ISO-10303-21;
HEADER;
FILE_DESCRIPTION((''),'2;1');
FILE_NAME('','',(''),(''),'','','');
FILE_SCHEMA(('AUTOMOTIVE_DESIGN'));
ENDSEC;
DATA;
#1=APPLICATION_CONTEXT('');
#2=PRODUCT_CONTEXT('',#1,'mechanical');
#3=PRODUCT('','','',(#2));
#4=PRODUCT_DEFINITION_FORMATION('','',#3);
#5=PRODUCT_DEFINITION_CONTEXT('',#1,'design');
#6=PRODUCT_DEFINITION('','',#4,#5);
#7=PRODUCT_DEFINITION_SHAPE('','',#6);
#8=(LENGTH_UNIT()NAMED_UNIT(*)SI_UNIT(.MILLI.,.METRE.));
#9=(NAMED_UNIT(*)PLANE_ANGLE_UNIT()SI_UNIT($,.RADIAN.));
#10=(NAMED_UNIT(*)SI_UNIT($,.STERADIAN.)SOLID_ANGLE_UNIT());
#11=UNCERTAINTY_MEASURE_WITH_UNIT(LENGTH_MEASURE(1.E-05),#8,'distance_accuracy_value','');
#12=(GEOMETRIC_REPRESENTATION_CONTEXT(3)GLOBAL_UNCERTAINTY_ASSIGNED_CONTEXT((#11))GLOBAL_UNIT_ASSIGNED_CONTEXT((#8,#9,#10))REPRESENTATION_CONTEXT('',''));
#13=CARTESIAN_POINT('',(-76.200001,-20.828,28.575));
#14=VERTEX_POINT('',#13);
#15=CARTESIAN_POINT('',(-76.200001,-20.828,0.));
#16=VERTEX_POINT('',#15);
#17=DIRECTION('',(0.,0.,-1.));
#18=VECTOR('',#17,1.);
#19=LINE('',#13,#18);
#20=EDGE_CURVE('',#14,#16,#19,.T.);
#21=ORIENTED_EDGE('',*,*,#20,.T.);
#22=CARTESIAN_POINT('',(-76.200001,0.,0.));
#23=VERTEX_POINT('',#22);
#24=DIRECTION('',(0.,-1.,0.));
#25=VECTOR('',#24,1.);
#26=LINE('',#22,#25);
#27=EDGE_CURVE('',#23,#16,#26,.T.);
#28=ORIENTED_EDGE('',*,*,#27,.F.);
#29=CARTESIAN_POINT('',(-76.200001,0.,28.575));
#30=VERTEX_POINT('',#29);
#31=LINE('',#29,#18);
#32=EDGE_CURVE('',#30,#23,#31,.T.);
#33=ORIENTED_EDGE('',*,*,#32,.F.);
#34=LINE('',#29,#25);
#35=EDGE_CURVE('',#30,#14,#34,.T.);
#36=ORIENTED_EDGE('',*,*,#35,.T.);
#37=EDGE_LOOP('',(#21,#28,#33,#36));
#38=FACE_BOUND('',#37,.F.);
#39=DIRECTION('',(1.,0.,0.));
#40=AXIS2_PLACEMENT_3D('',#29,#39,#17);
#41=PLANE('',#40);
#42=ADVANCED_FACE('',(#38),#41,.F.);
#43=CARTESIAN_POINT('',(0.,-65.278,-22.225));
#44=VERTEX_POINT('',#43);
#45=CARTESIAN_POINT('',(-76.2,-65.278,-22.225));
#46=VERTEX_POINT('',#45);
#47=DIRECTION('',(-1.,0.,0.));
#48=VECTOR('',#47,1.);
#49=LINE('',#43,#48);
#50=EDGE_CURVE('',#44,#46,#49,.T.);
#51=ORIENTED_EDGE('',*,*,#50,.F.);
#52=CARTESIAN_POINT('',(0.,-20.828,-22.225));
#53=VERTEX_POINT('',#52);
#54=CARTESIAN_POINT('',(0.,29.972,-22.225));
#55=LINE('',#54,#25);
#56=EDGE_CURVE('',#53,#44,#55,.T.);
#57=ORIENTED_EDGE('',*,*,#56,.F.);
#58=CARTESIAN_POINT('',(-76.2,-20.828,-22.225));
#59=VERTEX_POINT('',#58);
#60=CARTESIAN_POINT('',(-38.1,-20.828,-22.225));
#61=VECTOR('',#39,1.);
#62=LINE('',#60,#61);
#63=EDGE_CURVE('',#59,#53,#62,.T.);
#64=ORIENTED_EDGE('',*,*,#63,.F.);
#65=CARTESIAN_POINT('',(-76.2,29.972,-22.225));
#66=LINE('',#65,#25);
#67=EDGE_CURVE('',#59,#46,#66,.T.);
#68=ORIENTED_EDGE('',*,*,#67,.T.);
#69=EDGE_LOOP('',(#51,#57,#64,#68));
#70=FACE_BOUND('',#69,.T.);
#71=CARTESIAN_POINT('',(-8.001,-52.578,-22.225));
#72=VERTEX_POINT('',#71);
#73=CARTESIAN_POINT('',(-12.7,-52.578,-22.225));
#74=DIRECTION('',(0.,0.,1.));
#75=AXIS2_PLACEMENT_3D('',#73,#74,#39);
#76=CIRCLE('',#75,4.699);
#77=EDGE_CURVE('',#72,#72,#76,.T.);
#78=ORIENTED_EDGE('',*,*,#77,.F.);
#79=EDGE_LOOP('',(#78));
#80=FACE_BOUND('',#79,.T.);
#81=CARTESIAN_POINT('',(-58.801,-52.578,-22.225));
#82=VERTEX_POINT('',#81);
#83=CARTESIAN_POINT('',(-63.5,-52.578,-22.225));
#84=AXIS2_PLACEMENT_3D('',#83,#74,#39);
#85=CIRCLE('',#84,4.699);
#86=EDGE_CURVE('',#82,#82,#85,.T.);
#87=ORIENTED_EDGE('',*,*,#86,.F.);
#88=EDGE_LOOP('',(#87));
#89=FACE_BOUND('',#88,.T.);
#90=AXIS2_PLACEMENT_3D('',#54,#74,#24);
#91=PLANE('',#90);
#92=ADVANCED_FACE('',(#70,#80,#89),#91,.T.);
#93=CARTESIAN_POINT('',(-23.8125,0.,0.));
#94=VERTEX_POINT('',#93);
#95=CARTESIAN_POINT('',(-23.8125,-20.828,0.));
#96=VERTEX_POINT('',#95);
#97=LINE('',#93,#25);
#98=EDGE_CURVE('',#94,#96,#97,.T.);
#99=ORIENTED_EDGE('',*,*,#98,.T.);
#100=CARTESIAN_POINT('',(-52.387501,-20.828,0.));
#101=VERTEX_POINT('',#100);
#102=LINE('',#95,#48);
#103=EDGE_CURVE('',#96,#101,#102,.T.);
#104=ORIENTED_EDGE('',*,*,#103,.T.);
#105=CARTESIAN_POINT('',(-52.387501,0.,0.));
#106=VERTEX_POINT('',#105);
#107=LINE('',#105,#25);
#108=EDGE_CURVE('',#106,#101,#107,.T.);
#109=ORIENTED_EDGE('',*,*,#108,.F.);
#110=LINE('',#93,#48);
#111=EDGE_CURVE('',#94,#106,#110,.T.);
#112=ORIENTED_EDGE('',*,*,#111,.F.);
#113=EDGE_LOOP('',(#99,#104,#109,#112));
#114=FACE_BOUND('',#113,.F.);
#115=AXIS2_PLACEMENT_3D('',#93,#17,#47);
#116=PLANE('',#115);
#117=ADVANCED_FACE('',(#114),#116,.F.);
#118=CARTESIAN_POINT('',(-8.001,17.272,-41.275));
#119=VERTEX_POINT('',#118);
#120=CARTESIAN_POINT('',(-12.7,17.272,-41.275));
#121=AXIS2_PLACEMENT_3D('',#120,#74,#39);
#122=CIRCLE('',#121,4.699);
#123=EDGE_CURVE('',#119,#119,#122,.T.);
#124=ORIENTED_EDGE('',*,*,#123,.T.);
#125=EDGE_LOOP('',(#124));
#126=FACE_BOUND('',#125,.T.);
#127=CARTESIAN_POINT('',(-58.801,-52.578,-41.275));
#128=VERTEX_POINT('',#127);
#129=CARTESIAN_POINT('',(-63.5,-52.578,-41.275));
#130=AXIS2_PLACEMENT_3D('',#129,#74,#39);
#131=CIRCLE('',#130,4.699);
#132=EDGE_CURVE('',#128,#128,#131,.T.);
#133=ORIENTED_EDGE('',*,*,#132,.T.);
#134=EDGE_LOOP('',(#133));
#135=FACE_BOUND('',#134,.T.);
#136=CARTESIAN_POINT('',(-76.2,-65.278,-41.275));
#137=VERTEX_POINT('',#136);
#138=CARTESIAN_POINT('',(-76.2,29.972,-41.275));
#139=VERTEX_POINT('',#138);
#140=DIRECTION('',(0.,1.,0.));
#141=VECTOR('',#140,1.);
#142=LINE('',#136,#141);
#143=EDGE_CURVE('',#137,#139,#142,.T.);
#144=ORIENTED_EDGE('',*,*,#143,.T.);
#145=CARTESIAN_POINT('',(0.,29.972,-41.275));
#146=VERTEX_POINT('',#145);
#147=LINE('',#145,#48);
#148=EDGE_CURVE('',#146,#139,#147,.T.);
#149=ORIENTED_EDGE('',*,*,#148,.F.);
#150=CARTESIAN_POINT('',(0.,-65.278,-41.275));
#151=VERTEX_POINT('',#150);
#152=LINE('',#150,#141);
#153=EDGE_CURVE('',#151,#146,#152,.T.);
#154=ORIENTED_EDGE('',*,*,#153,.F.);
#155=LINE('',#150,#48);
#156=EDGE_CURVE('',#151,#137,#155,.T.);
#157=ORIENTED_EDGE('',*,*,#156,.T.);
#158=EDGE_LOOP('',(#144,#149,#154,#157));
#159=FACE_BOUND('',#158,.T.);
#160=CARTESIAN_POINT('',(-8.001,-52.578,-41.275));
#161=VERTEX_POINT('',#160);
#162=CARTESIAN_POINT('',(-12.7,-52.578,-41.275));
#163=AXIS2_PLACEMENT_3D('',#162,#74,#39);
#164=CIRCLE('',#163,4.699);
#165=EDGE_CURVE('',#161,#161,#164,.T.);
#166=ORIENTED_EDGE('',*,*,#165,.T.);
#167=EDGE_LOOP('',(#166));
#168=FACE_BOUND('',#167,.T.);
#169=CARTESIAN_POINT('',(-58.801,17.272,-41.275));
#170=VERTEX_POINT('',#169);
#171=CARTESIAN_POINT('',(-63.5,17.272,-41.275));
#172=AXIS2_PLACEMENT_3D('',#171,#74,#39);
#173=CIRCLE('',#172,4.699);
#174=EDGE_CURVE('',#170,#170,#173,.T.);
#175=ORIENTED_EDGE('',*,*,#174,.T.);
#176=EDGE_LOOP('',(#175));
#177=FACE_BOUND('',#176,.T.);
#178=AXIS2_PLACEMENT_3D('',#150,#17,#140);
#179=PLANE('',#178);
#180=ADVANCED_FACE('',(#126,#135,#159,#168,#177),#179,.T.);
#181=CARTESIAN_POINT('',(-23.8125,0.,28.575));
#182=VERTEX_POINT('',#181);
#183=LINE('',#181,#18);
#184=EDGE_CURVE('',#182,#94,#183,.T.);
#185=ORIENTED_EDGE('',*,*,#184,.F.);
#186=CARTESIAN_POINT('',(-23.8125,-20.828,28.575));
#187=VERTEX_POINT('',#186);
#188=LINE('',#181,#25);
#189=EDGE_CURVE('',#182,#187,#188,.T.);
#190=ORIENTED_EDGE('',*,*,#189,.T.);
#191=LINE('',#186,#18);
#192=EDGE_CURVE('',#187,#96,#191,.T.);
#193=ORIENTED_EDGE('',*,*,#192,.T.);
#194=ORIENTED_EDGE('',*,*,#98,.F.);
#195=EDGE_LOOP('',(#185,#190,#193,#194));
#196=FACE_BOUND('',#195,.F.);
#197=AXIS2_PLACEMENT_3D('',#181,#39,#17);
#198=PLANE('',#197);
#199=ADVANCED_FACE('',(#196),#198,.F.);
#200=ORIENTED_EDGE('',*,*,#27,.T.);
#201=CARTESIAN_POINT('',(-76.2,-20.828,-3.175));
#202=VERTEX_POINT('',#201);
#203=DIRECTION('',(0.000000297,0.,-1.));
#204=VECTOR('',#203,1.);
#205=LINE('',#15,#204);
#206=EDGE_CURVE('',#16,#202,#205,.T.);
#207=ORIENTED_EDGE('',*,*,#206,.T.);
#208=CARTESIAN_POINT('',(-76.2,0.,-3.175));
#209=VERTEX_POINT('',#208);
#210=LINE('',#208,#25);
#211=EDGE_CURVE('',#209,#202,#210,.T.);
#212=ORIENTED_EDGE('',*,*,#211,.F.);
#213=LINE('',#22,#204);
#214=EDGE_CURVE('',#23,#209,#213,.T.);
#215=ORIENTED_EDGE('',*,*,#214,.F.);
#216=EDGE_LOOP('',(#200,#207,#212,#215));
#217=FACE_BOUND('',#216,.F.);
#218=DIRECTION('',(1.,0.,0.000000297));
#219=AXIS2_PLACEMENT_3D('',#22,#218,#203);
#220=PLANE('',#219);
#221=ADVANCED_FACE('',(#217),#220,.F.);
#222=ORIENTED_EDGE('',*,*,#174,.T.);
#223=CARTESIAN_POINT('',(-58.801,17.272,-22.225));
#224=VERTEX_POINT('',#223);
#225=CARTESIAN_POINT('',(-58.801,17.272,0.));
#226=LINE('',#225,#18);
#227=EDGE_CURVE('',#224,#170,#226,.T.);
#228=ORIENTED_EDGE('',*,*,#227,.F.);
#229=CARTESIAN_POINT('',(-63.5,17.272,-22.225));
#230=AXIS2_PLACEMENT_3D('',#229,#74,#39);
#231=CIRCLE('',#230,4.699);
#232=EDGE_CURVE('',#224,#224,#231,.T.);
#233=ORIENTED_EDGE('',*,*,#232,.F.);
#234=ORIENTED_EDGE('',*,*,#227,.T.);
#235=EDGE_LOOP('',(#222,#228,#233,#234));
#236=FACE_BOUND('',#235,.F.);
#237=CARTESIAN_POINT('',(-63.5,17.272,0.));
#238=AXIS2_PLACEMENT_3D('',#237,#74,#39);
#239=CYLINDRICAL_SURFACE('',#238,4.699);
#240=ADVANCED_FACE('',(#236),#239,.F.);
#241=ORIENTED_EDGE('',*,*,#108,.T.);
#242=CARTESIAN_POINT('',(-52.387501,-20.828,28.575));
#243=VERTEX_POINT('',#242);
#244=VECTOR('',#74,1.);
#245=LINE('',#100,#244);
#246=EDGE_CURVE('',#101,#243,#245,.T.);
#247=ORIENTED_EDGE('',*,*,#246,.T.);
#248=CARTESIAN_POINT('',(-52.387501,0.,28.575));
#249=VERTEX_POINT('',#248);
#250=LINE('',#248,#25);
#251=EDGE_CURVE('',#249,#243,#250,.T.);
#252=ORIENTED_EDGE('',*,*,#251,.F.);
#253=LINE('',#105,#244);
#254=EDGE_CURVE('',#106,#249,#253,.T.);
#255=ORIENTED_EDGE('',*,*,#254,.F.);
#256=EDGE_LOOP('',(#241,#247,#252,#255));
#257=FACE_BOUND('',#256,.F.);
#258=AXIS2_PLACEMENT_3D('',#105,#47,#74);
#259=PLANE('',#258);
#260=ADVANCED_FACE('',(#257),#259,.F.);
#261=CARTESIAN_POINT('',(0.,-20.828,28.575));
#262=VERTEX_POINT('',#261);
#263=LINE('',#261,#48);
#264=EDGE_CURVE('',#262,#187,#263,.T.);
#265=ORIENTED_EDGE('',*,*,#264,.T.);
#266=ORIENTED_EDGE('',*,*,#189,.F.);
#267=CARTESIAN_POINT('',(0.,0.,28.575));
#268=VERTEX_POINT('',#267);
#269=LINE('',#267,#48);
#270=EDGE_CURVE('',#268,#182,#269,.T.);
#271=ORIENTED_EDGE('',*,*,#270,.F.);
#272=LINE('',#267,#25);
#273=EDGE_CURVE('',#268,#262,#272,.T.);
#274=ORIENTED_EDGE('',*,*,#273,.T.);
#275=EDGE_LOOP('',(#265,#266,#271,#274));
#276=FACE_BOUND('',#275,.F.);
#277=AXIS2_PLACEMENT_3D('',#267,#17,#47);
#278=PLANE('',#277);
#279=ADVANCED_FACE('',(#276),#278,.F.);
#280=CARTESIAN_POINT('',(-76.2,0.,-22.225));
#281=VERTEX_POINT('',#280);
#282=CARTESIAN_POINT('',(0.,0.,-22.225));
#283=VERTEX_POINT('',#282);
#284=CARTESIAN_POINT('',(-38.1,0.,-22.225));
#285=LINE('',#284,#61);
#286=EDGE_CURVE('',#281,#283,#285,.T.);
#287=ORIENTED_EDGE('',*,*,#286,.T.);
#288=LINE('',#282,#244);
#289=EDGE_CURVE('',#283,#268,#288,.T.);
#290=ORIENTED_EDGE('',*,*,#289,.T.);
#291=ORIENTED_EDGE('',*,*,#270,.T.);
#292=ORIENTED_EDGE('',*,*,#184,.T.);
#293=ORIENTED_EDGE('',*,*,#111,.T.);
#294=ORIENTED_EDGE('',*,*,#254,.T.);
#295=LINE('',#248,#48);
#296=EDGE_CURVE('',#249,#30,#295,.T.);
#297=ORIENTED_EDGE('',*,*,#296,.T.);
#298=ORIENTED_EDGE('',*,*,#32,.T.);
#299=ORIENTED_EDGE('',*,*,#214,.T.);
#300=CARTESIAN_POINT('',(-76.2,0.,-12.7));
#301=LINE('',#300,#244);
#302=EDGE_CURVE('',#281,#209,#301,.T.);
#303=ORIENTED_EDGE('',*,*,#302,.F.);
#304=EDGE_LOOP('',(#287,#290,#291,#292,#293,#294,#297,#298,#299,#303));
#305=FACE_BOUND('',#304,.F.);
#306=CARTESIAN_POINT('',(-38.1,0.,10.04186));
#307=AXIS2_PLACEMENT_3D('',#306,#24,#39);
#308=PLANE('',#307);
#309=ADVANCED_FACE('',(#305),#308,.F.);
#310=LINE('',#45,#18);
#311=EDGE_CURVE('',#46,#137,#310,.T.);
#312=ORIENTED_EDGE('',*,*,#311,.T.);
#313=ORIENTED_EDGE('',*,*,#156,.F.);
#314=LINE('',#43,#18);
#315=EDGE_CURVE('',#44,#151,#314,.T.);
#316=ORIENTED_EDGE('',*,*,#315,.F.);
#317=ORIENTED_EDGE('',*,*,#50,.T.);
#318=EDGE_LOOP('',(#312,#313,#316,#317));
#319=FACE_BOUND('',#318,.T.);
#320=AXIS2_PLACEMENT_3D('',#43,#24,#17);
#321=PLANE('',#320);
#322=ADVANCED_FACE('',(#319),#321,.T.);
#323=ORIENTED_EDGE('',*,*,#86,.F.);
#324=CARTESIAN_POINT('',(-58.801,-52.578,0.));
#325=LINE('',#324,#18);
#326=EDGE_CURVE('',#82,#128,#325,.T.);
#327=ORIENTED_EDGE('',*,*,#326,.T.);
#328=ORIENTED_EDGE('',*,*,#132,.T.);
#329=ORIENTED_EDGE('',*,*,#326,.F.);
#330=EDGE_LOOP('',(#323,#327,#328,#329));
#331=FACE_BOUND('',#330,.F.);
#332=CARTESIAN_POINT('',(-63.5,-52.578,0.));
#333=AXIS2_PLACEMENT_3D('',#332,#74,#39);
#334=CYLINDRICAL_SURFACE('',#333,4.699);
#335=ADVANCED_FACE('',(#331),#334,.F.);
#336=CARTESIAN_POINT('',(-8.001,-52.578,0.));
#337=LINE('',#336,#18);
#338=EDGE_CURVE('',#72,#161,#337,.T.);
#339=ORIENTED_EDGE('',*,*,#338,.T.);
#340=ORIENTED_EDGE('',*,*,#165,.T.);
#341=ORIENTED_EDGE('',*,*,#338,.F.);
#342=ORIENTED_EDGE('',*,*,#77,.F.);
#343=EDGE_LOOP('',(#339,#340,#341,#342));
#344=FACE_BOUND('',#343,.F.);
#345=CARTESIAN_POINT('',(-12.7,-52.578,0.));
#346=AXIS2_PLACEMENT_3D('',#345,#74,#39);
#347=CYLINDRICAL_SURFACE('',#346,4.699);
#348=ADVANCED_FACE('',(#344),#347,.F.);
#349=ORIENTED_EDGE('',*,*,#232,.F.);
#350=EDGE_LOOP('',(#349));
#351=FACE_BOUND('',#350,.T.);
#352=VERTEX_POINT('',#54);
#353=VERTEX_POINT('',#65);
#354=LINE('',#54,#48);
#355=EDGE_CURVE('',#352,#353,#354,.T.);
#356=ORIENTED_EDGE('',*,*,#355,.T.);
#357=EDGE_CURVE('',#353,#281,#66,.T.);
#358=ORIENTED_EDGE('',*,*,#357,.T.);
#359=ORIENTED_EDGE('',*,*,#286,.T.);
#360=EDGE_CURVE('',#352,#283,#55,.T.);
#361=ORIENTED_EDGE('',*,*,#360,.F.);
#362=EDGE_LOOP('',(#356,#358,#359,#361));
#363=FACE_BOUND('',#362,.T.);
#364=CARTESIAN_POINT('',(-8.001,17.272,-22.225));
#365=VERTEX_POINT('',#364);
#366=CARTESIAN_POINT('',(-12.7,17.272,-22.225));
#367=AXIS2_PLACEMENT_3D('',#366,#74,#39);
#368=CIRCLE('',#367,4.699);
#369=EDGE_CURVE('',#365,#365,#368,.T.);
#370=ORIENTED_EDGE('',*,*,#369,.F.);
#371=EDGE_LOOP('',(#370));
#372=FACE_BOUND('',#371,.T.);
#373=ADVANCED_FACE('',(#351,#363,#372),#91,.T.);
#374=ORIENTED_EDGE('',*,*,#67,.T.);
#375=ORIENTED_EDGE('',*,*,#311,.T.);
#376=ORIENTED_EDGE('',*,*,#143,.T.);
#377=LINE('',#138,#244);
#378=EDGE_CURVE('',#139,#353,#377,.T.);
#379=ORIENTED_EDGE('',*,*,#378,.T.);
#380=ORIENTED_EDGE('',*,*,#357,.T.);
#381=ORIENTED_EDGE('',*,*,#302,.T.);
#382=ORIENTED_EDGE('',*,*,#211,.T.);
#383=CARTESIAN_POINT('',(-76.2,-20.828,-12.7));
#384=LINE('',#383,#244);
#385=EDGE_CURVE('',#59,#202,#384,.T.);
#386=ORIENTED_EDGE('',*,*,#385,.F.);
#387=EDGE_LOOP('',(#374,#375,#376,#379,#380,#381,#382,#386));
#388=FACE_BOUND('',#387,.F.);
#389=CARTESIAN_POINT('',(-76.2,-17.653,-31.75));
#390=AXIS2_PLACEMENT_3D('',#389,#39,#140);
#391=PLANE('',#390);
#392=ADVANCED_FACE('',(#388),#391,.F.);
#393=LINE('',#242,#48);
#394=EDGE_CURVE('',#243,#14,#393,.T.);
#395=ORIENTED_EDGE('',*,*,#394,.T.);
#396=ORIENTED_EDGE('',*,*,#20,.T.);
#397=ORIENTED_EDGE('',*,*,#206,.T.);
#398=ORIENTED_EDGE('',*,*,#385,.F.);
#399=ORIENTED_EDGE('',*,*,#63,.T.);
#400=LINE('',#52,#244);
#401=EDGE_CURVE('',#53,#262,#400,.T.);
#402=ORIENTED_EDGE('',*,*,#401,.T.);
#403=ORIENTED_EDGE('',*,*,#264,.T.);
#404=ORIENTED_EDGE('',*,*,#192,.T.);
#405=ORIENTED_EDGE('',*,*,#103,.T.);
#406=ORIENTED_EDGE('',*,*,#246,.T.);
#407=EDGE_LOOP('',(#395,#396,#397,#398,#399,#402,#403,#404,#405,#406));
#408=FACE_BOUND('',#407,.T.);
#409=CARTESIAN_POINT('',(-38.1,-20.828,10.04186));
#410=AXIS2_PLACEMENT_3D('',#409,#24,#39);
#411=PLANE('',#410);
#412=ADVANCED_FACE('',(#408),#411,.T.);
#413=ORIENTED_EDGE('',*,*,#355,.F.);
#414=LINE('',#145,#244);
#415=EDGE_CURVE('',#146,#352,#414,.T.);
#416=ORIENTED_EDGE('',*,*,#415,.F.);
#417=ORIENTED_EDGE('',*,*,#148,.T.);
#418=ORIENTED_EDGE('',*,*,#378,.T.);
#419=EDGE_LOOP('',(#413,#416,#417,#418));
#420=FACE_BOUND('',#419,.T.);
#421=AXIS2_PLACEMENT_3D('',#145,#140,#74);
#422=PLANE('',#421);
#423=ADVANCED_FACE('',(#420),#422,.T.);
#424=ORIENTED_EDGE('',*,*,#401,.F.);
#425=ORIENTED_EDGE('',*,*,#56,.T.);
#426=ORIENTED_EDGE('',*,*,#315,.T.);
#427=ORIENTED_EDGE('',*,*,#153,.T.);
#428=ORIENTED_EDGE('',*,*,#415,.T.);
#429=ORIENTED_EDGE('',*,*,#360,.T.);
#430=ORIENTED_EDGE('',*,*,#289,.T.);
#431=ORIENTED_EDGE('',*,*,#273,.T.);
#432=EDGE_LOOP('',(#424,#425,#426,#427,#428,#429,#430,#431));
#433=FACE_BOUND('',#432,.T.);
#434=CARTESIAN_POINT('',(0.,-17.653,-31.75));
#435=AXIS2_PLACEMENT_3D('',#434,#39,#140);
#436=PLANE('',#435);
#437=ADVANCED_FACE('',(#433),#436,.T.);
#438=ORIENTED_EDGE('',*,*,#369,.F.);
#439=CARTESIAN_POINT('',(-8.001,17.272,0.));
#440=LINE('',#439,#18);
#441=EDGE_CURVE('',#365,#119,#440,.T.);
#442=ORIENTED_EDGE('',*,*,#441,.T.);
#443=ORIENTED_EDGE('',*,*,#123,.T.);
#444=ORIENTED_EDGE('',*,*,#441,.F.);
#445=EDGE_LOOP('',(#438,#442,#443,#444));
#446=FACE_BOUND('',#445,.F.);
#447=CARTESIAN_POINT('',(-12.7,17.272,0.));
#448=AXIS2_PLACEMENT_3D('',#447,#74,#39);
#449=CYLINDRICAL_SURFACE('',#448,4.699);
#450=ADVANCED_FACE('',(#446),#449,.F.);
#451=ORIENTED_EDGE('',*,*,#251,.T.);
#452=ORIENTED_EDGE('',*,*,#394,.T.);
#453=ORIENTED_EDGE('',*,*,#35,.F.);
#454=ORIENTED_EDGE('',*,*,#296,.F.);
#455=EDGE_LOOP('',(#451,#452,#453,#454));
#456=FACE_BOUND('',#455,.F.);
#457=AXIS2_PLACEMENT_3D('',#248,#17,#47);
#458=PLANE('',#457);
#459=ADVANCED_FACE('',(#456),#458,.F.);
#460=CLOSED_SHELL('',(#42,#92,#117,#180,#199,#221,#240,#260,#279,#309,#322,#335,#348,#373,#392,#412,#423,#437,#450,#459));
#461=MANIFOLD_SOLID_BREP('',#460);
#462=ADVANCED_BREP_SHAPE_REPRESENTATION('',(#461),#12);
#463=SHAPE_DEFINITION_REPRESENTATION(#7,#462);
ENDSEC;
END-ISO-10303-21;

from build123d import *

# Parameters (mm, degrees)
F0_W     = 76.2
F0_H     = 19.05
F1_DEPTH = 20.828
F3_DEPTH = 76.2
F4_R     = 4.699
F5_DEPTH = 41.276


# Not quite as in the source:
# - ends of sketch curves that miss each other by under 0.0002 mm in the source are joined


with BuildPart() as f1:
    # F0 (on Front) → F1 (new body)
    with BuildSketch(Plane.XZ):
        Polygon((-23.8125, 0), (-52.3875009418, 0), (-52.3875009418, 28.575), (-76.2000009418, 28.575), (-76.2000009418, 0), (-76.2, -3.175), (0, -3.175), (0, 0), (0, 28.575), (-23.8125, 28.575), align=None)
        with Locations((-38.1, -12.7)):
            Rectangle(F0_W, F0_H)
    extrude(amount=F1_DEPTH)

    # F2 (on Right) → F3 (join)
    with BuildSketch(Plane.YZ):
        Polygon((0, -22.225), (-20.828, -22.225), (-65.278, -22.225), (-65.278, -41.275), (29.972, -41.275), (29.972, -22.225), align=None)
    extrude(amount=-F3_DEPTH)

    # F4 (on Top) → F5 (cut, through all)
    with BuildSketch(Plane.XY):
        with Locations((-12.7, 17.272)):
            Circle(F4_R)
        with Locations((-12.7, -52.578)):
            Circle(F4_R)
        with Locations((-63.5, -52.578)):
            Circle(F4_R)
        with Locations((-63.5, 17.272)):
            Circle(F4_R)
    extrude(amount=-F5_DEPTH, mode=Mode.SUBTRACT)


solid = f1.part
